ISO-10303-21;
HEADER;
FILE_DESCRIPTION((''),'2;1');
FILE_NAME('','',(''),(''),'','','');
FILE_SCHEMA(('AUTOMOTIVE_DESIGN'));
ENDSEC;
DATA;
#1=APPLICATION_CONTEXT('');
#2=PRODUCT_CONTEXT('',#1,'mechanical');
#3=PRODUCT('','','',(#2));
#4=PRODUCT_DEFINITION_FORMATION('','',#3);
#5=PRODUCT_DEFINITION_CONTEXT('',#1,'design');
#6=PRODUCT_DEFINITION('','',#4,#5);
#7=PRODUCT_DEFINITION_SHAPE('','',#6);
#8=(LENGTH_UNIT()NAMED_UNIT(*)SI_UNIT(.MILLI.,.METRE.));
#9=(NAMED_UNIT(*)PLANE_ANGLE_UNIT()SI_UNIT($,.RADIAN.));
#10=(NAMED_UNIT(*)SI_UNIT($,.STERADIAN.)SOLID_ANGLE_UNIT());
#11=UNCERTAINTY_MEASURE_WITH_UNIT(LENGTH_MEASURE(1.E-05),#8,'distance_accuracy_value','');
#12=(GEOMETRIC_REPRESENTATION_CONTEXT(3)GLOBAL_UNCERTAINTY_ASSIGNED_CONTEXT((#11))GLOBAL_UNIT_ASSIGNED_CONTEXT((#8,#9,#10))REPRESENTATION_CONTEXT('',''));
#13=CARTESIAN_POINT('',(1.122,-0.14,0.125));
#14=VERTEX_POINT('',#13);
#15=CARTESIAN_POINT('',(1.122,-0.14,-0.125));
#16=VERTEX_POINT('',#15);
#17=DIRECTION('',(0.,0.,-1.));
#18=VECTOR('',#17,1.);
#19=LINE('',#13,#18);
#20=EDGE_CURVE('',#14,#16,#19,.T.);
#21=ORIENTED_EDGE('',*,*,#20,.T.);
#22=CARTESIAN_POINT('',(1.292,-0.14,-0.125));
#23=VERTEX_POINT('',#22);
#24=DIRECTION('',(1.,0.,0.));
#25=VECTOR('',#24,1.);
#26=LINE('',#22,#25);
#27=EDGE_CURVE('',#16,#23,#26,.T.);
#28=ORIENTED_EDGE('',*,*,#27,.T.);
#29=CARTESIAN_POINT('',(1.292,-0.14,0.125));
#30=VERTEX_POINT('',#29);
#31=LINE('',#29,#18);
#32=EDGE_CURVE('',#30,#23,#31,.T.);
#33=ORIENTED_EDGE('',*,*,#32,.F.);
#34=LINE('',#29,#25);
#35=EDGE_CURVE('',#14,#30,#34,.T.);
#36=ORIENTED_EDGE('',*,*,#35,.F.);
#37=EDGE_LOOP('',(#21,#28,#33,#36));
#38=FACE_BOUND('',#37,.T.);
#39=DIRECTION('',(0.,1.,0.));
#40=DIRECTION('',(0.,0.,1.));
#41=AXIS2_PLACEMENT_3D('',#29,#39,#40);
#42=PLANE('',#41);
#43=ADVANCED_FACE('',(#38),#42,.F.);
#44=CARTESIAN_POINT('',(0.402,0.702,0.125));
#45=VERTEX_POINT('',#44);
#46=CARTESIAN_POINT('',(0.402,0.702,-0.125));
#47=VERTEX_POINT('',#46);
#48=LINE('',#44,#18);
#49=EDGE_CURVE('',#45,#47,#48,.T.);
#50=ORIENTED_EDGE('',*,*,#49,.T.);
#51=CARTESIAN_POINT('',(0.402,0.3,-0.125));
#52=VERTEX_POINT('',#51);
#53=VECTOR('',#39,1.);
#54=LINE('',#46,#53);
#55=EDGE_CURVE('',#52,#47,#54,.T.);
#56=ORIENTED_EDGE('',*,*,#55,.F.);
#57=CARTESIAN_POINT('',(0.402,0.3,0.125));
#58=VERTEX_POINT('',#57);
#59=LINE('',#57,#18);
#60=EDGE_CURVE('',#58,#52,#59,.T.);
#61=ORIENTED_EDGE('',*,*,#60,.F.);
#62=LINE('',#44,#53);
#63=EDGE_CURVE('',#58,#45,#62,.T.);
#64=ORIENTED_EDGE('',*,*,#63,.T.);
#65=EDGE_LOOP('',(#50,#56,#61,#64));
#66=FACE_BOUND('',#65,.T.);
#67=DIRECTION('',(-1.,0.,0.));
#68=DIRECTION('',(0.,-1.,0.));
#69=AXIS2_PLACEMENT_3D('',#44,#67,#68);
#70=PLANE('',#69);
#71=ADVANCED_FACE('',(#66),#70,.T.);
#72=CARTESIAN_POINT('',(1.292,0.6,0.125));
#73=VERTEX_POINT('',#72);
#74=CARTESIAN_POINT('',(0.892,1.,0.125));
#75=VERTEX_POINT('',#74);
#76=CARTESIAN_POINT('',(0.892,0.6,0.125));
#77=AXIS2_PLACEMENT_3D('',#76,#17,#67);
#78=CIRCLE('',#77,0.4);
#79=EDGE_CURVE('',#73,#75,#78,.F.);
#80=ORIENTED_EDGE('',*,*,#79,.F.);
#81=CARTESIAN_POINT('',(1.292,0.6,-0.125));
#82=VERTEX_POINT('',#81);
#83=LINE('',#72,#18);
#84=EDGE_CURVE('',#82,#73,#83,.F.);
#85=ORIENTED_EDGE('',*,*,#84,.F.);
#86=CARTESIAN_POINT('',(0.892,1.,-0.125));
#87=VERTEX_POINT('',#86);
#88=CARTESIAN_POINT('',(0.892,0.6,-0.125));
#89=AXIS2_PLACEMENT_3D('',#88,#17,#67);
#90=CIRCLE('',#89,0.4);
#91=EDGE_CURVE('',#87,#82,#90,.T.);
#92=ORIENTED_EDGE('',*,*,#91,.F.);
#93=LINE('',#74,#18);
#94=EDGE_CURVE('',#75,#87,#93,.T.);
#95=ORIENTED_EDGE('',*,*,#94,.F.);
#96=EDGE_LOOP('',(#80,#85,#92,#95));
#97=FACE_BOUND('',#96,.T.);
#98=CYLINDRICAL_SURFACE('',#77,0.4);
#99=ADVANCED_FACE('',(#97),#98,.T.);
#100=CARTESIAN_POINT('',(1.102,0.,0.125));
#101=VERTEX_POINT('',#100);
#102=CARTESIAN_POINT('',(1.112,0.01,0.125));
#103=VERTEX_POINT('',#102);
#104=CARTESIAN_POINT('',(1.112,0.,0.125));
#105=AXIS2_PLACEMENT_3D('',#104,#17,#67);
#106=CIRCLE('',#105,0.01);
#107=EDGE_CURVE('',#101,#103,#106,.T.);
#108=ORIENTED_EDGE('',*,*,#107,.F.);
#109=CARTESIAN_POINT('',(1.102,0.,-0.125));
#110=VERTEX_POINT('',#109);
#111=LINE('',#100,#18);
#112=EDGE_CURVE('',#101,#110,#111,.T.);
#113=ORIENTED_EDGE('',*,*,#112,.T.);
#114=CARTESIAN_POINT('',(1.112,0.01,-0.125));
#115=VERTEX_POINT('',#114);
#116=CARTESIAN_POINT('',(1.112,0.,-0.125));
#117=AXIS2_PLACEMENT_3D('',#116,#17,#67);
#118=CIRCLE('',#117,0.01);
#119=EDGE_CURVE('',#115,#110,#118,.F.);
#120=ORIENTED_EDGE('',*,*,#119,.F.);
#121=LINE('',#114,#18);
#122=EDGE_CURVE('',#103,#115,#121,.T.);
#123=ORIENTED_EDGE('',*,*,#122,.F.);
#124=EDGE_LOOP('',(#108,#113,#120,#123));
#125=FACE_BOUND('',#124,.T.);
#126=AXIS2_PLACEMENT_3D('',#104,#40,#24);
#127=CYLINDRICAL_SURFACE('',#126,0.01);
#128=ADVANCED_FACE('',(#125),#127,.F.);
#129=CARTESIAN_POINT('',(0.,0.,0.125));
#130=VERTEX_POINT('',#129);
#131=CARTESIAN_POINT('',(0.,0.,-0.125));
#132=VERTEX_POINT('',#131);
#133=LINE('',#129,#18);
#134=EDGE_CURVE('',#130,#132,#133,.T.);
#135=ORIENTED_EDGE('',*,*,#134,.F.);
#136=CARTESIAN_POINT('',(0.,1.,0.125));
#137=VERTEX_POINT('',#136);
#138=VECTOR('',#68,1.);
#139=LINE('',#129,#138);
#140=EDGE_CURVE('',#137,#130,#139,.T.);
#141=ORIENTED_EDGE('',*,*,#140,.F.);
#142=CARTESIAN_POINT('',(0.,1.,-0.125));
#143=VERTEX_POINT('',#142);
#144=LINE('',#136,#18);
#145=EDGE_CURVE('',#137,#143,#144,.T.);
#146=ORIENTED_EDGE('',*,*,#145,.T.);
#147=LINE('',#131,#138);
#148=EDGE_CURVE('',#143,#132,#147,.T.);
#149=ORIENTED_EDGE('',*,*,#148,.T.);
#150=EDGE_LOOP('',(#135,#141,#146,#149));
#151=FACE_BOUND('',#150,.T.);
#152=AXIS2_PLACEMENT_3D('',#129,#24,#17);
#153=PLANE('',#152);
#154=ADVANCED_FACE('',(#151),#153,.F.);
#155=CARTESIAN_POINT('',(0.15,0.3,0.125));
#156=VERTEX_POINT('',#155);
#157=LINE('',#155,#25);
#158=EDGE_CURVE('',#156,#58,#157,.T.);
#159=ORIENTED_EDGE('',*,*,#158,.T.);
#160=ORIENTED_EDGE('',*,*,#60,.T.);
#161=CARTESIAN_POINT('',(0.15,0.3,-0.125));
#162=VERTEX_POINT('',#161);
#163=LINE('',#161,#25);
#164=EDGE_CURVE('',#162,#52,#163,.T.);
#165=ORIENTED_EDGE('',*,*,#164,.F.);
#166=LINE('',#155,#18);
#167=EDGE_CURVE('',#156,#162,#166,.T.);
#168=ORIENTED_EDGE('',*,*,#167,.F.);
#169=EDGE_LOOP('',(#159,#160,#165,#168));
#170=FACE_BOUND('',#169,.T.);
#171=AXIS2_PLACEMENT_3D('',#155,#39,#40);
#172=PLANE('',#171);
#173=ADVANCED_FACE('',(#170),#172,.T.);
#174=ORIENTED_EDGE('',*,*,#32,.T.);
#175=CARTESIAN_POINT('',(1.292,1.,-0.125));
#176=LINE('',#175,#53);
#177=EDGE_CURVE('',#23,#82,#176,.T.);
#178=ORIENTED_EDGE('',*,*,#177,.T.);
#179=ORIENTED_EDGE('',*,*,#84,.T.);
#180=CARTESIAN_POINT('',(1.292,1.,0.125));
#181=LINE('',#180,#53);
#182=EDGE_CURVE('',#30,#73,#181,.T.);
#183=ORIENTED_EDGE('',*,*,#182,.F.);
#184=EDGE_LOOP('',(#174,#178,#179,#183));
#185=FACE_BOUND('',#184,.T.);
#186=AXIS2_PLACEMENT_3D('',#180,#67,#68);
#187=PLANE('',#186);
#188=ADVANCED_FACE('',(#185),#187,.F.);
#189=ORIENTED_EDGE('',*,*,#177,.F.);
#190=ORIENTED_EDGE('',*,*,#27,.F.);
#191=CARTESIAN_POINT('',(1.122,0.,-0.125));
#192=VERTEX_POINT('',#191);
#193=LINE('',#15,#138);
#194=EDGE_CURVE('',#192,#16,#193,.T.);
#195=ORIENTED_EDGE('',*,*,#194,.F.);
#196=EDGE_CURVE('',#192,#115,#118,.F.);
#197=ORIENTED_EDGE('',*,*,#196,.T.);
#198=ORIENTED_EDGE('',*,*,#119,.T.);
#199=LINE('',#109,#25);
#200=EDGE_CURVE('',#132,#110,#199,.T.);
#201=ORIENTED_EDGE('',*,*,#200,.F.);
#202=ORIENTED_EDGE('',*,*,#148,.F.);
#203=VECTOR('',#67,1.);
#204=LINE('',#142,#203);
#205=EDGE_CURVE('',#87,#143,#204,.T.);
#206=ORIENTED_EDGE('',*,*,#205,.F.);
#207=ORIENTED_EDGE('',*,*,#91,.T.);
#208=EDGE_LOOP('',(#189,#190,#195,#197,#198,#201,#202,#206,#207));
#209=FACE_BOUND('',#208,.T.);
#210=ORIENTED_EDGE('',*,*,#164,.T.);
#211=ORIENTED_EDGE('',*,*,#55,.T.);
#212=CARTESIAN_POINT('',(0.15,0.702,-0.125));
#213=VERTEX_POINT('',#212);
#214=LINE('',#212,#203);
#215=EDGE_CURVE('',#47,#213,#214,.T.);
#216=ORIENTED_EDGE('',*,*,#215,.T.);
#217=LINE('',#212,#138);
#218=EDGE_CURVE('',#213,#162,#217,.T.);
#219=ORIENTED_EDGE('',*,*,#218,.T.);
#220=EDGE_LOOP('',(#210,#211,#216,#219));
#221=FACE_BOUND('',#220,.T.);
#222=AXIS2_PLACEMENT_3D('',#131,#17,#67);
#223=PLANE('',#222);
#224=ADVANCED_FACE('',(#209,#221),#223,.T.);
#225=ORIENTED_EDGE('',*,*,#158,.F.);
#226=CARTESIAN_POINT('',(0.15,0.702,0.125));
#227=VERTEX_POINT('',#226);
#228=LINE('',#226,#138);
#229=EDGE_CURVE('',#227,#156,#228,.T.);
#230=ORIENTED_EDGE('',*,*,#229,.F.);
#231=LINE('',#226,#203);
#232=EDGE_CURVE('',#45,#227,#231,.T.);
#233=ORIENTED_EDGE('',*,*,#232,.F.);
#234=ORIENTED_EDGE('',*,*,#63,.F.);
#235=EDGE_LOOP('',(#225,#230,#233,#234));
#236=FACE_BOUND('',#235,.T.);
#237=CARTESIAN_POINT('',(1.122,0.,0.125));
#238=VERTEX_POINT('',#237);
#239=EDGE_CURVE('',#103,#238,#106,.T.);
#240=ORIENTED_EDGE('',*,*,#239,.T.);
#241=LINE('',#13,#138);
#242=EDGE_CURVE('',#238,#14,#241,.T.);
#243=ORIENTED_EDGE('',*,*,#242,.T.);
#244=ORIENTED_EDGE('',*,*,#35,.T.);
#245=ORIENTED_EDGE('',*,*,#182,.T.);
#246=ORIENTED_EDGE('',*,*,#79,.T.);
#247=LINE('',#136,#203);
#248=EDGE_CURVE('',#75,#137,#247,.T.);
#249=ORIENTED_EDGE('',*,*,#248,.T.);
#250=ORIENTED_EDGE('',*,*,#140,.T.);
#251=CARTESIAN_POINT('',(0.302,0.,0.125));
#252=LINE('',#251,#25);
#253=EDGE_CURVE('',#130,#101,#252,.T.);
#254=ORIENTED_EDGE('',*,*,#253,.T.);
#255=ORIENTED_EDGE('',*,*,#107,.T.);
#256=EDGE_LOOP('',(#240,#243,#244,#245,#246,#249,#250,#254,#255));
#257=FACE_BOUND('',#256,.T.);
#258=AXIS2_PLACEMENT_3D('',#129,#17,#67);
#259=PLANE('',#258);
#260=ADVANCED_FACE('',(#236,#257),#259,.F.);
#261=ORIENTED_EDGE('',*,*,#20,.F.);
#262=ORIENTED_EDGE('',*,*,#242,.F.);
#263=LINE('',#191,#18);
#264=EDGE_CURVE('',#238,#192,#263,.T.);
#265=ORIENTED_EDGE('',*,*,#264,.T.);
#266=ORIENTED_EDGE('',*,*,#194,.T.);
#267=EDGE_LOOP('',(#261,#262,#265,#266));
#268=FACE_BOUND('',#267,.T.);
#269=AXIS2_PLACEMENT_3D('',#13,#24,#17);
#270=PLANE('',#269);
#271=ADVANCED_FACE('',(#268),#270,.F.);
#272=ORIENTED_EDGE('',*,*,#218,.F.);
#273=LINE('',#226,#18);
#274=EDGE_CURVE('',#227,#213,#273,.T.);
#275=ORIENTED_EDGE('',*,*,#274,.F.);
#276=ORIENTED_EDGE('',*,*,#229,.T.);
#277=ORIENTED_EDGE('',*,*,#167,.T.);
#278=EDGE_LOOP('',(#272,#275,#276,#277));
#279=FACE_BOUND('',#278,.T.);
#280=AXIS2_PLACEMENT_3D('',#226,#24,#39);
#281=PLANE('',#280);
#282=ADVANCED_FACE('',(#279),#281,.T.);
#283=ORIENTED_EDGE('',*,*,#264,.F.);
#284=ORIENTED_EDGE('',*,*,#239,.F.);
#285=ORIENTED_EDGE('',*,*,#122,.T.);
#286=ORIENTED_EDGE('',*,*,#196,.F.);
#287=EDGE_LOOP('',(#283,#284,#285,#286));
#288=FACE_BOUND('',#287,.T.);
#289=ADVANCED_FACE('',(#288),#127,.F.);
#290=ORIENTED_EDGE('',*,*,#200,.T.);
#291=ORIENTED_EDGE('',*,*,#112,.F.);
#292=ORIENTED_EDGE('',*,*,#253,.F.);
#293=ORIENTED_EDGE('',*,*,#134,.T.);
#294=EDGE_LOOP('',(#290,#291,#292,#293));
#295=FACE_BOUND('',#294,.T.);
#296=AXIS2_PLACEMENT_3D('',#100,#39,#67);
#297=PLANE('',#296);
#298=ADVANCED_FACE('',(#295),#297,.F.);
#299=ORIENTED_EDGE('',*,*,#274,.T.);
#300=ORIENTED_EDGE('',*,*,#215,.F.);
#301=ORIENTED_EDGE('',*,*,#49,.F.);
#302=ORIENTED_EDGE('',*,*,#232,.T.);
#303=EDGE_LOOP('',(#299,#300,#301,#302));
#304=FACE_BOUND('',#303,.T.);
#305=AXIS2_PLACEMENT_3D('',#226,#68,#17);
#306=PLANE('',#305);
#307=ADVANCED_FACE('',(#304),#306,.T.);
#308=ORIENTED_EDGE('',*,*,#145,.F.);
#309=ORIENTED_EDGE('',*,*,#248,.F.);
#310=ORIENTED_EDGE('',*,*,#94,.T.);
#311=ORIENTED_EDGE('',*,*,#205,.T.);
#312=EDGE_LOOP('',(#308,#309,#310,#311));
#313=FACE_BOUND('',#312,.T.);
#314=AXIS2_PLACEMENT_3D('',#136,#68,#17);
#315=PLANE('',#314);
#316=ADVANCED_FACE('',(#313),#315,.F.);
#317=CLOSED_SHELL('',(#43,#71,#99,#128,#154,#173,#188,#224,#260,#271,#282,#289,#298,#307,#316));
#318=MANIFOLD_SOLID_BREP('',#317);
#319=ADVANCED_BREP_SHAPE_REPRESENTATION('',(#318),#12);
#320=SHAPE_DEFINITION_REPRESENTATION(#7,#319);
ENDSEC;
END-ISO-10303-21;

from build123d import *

# Parameters (mm, degrees)
FRAME_OUTLINE_W     = 0.252
FRAME_OUTLINE_H     = 0.402
BOSS_EXTRUDE1_DEPTH = 0.125
FILLET1_R           = 0.01
FILLET2_R           = 0.4


with BuildPart() as part:
    # frame_outline → Boss-Extrude1 (new, symmetric)
    with BuildSketch(Plane.XY):
        Polygon((0, 0), (0, 1), (1.292, 1), (1.292, -0.14), (1.122, -0.14), (1.122, 0.01), (1.102, 0.01), (1.102, 0), (0.302, 0), align=None)
        with Locations((0.276, 0.501)):
            Rectangle(FRAME_OUTLINE_W, FRAME_OUTLINE_H, mode=Mode.SUBTRACT)
    extrude(amount=BOSS_EXTRUDE1_DEPTH, both=True)

    # Fillet1
    fillet1_edges = [part.edges().sort_by_distance(p)[0] for p in [
        (1.122, 0.01, 0),
        (1.102, 0.01, 0),
    ]]
    fillet(fillet1_edges, radius=FILLET1_R - 0.0001)  # a hair under: the kernel refuses the full size

    # Fillet2
    fillet2_edges = [part.edges().sort_by_distance(p)[0] for p in [
        (1.292, 1, 0),
    ]]
    fillet(fillet2_edges, radius=FILLET2_R)


solid = part.part
